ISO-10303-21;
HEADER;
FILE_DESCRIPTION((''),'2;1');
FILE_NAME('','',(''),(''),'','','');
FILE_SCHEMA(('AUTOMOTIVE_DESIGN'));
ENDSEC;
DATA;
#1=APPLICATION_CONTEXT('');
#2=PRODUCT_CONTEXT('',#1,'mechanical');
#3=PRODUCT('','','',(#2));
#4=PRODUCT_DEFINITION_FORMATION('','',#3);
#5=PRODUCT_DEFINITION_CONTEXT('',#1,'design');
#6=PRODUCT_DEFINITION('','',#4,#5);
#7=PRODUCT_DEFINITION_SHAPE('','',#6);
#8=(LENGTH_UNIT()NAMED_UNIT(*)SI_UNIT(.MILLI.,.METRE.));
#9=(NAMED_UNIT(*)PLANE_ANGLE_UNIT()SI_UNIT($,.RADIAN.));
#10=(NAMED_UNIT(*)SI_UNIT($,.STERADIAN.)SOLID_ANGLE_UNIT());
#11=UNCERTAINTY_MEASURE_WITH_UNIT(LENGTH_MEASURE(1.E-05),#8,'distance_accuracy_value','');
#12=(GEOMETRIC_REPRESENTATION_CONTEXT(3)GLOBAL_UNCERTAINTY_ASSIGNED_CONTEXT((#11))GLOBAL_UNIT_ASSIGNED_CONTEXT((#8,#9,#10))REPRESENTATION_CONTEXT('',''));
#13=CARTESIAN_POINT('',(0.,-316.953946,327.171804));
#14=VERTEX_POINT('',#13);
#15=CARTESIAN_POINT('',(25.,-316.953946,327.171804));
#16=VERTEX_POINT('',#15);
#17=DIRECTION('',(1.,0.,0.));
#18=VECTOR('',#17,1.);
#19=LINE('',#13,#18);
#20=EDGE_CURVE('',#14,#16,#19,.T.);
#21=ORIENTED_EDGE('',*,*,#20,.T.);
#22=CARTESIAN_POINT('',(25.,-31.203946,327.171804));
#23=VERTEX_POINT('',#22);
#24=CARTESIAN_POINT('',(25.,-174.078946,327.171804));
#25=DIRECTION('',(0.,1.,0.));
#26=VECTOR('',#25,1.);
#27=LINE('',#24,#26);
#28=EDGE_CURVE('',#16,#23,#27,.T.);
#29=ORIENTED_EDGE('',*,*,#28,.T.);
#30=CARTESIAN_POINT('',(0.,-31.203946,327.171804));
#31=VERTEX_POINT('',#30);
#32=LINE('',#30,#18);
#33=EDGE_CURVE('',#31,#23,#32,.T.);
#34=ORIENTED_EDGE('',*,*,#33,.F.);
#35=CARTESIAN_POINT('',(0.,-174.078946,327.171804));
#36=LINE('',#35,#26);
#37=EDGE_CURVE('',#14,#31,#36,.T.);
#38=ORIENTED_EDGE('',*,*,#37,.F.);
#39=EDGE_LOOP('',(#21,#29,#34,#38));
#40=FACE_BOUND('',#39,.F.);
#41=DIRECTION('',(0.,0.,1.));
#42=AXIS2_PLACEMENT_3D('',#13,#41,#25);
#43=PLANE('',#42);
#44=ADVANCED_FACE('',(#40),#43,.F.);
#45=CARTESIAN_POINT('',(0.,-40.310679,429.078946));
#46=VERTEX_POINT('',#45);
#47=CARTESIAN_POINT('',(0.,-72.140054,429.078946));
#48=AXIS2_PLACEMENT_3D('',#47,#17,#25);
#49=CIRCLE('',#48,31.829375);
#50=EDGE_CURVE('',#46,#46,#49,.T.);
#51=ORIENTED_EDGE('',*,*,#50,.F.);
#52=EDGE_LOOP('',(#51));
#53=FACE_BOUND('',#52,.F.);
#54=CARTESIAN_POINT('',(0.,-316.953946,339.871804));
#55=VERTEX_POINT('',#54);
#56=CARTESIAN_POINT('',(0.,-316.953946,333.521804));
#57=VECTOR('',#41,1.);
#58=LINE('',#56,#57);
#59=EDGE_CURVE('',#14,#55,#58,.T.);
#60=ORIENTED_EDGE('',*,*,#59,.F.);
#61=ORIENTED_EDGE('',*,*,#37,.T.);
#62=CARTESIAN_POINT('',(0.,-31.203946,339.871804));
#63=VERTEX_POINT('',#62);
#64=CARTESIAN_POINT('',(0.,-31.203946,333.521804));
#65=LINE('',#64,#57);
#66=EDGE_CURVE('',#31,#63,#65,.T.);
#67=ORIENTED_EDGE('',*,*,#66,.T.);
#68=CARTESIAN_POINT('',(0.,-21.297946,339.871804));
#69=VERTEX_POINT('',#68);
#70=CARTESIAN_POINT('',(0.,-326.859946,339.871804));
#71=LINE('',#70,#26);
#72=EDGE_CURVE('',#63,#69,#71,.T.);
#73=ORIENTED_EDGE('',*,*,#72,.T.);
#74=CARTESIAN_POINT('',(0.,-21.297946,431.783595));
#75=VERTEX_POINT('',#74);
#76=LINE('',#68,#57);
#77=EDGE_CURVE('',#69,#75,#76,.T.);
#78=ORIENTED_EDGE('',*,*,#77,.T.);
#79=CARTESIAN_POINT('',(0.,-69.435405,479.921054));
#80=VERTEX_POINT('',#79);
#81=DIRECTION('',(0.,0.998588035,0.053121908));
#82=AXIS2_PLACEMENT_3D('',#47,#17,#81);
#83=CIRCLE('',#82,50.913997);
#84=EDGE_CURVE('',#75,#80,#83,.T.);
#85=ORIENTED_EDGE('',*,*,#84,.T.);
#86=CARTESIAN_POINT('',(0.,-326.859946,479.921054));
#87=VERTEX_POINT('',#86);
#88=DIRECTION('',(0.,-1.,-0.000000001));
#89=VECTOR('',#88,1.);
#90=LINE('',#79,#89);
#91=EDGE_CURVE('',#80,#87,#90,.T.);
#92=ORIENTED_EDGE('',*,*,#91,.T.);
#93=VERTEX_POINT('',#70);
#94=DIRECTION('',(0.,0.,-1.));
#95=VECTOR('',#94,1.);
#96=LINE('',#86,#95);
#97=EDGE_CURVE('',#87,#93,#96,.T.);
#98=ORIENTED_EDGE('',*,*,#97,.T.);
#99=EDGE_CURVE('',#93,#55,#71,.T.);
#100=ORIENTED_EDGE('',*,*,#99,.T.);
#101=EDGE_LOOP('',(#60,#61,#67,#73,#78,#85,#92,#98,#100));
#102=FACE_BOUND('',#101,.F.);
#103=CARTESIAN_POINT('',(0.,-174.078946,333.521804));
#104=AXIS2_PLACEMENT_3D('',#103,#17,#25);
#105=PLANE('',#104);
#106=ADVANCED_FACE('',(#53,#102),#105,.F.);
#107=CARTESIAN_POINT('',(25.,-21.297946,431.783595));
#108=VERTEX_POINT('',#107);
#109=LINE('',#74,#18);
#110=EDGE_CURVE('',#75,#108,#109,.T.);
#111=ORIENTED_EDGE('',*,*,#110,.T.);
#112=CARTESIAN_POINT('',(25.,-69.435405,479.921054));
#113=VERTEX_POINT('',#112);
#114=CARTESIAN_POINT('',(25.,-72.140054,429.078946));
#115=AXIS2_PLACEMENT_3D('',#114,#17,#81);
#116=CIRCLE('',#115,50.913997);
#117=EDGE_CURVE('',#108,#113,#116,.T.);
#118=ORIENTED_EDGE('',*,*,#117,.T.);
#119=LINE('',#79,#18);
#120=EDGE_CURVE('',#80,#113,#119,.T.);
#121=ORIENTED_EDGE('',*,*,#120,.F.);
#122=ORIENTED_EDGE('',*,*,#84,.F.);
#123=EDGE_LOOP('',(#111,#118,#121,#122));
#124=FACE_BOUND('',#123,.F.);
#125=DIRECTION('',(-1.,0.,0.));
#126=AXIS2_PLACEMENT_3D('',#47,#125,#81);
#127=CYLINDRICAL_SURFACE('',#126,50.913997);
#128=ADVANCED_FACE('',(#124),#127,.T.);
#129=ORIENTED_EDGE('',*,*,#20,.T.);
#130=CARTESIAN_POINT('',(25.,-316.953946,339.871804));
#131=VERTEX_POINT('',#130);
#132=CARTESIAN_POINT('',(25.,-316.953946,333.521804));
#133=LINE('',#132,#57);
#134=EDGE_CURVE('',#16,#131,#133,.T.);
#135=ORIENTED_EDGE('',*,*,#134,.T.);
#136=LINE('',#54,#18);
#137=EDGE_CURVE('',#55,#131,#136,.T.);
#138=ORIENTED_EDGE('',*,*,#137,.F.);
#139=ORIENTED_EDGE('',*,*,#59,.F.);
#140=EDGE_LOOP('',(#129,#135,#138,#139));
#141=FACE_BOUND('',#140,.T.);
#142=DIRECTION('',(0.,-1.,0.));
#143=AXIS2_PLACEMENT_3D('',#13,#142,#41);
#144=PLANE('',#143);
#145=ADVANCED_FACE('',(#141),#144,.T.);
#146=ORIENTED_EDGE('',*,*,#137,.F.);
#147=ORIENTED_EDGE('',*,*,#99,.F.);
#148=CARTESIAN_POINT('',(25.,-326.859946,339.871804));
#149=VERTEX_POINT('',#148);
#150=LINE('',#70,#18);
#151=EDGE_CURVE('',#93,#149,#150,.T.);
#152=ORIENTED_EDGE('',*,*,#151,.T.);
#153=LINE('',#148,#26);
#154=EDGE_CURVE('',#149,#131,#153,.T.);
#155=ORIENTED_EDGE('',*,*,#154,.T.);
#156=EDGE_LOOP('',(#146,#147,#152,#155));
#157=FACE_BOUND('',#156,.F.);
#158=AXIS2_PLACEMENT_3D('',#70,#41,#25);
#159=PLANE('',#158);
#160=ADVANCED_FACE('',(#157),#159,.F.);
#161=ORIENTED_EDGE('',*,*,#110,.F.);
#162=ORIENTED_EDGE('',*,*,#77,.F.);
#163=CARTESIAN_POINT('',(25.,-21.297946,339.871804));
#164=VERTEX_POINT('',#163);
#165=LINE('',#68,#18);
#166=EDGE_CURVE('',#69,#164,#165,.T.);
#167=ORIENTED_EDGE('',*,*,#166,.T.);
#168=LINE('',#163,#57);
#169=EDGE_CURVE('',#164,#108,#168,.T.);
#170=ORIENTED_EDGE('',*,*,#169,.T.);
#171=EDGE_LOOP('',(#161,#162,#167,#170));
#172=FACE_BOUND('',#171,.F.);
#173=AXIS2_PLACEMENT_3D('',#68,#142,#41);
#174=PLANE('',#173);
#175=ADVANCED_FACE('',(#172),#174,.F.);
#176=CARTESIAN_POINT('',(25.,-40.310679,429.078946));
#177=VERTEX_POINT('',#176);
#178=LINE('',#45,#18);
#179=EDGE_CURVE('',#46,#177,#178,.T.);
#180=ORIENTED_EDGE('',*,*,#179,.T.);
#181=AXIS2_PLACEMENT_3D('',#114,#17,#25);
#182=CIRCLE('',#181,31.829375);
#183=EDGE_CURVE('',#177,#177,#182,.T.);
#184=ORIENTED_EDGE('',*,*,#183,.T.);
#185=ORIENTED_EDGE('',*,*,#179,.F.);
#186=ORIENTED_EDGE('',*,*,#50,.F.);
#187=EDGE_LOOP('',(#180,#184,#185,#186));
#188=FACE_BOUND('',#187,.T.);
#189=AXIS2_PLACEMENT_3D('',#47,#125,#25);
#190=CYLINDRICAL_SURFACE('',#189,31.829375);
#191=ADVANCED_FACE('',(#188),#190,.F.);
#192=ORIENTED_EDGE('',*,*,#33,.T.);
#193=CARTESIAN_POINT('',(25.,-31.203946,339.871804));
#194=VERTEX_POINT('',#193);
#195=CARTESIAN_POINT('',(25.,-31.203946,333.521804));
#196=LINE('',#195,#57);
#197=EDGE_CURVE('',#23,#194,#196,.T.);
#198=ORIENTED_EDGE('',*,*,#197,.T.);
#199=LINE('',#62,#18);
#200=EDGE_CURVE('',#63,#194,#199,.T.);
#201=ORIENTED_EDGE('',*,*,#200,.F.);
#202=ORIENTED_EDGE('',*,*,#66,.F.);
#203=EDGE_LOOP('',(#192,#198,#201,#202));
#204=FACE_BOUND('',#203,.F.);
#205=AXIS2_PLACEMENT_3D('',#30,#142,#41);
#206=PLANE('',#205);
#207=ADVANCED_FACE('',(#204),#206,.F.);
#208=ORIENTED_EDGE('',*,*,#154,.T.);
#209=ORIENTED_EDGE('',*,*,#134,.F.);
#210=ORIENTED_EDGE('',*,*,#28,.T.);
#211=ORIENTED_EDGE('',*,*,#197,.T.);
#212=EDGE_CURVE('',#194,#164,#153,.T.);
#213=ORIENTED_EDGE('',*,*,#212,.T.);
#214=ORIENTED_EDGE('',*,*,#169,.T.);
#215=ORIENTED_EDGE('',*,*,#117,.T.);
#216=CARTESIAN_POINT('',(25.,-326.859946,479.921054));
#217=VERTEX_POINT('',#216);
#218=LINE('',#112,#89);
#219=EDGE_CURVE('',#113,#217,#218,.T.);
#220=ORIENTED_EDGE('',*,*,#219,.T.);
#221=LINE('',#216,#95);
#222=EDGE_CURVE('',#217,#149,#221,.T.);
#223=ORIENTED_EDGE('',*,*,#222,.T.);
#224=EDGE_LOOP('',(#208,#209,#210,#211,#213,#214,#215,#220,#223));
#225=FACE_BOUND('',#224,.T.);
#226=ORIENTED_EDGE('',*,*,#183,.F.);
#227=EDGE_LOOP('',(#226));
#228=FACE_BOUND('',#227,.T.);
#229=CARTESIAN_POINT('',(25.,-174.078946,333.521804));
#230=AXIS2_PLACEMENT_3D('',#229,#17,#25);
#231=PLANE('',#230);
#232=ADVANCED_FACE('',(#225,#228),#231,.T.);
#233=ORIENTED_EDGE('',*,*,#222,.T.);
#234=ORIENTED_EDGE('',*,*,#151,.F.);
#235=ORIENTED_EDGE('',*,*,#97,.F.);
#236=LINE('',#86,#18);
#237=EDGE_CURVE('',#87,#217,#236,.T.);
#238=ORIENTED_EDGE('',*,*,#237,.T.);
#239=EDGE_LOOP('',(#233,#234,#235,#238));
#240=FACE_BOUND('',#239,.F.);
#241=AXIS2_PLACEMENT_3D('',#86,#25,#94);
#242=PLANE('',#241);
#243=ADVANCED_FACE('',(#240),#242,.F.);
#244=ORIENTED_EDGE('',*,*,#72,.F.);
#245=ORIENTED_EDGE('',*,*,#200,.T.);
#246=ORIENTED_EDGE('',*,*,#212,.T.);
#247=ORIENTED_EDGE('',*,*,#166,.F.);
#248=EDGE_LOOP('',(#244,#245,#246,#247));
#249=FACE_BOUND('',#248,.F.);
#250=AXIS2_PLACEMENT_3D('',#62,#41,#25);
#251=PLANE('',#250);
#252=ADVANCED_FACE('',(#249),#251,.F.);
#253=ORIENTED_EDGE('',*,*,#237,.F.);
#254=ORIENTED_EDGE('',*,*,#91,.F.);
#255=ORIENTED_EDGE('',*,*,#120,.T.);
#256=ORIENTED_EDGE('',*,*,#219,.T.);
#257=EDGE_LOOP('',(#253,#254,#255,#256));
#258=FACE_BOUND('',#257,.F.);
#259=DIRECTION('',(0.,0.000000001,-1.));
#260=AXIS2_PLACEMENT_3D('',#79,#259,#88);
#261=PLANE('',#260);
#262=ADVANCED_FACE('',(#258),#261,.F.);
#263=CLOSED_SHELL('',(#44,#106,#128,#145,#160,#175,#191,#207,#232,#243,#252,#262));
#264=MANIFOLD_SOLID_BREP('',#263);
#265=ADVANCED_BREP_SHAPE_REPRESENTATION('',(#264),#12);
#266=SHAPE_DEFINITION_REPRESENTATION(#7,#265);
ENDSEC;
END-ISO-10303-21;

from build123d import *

# Parameters (mm, degrees)
F0_W     = 285.75
F0_H     = 12.7
F0_R     = 31.829375
F1_DEPTH = 25


# Not quite as in the source:
# - ends of sketch curves that miss each other by under 0.0002 mm in the source are joined


with BuildPart() as f1:
    # F0 (on Right) → F1 (new body)
    with BuildSketch(Plane.YZ):
        with Locations((-174.078946, 333.521804)):
            Rectangle(F0_W, F0_H)
        with BuildLine():
            Line((-316.953946, 339.871804), (-31.203946, 339.871804))
            Line((-31.203946, 339.871804), (-21.297946, 339.871804))
            Line((-21.297946, 339.871804), (-21.297946, 431.783595))
            ThreePointArc((-21.297946, 431.783595), (-36.138421464, 465.080578536), (-69.4354049904, 479.9210541806))
            Line((-69.4354049904, 479.9210541806), (-326.859946, 479.921054))
            Line((-326.859946, 479.921054), (-326.859946, 339.871804))
            Line((-326.859946, 339.871804), (-316.953946, 339.871804))
        make_face()
        with Locations((-72.140054, 429.078946)):
            Circle(F0_R, mode=Mode.SUBTRACT)
    extrude(amount=F1_DEPTH)


solid = f1.part
